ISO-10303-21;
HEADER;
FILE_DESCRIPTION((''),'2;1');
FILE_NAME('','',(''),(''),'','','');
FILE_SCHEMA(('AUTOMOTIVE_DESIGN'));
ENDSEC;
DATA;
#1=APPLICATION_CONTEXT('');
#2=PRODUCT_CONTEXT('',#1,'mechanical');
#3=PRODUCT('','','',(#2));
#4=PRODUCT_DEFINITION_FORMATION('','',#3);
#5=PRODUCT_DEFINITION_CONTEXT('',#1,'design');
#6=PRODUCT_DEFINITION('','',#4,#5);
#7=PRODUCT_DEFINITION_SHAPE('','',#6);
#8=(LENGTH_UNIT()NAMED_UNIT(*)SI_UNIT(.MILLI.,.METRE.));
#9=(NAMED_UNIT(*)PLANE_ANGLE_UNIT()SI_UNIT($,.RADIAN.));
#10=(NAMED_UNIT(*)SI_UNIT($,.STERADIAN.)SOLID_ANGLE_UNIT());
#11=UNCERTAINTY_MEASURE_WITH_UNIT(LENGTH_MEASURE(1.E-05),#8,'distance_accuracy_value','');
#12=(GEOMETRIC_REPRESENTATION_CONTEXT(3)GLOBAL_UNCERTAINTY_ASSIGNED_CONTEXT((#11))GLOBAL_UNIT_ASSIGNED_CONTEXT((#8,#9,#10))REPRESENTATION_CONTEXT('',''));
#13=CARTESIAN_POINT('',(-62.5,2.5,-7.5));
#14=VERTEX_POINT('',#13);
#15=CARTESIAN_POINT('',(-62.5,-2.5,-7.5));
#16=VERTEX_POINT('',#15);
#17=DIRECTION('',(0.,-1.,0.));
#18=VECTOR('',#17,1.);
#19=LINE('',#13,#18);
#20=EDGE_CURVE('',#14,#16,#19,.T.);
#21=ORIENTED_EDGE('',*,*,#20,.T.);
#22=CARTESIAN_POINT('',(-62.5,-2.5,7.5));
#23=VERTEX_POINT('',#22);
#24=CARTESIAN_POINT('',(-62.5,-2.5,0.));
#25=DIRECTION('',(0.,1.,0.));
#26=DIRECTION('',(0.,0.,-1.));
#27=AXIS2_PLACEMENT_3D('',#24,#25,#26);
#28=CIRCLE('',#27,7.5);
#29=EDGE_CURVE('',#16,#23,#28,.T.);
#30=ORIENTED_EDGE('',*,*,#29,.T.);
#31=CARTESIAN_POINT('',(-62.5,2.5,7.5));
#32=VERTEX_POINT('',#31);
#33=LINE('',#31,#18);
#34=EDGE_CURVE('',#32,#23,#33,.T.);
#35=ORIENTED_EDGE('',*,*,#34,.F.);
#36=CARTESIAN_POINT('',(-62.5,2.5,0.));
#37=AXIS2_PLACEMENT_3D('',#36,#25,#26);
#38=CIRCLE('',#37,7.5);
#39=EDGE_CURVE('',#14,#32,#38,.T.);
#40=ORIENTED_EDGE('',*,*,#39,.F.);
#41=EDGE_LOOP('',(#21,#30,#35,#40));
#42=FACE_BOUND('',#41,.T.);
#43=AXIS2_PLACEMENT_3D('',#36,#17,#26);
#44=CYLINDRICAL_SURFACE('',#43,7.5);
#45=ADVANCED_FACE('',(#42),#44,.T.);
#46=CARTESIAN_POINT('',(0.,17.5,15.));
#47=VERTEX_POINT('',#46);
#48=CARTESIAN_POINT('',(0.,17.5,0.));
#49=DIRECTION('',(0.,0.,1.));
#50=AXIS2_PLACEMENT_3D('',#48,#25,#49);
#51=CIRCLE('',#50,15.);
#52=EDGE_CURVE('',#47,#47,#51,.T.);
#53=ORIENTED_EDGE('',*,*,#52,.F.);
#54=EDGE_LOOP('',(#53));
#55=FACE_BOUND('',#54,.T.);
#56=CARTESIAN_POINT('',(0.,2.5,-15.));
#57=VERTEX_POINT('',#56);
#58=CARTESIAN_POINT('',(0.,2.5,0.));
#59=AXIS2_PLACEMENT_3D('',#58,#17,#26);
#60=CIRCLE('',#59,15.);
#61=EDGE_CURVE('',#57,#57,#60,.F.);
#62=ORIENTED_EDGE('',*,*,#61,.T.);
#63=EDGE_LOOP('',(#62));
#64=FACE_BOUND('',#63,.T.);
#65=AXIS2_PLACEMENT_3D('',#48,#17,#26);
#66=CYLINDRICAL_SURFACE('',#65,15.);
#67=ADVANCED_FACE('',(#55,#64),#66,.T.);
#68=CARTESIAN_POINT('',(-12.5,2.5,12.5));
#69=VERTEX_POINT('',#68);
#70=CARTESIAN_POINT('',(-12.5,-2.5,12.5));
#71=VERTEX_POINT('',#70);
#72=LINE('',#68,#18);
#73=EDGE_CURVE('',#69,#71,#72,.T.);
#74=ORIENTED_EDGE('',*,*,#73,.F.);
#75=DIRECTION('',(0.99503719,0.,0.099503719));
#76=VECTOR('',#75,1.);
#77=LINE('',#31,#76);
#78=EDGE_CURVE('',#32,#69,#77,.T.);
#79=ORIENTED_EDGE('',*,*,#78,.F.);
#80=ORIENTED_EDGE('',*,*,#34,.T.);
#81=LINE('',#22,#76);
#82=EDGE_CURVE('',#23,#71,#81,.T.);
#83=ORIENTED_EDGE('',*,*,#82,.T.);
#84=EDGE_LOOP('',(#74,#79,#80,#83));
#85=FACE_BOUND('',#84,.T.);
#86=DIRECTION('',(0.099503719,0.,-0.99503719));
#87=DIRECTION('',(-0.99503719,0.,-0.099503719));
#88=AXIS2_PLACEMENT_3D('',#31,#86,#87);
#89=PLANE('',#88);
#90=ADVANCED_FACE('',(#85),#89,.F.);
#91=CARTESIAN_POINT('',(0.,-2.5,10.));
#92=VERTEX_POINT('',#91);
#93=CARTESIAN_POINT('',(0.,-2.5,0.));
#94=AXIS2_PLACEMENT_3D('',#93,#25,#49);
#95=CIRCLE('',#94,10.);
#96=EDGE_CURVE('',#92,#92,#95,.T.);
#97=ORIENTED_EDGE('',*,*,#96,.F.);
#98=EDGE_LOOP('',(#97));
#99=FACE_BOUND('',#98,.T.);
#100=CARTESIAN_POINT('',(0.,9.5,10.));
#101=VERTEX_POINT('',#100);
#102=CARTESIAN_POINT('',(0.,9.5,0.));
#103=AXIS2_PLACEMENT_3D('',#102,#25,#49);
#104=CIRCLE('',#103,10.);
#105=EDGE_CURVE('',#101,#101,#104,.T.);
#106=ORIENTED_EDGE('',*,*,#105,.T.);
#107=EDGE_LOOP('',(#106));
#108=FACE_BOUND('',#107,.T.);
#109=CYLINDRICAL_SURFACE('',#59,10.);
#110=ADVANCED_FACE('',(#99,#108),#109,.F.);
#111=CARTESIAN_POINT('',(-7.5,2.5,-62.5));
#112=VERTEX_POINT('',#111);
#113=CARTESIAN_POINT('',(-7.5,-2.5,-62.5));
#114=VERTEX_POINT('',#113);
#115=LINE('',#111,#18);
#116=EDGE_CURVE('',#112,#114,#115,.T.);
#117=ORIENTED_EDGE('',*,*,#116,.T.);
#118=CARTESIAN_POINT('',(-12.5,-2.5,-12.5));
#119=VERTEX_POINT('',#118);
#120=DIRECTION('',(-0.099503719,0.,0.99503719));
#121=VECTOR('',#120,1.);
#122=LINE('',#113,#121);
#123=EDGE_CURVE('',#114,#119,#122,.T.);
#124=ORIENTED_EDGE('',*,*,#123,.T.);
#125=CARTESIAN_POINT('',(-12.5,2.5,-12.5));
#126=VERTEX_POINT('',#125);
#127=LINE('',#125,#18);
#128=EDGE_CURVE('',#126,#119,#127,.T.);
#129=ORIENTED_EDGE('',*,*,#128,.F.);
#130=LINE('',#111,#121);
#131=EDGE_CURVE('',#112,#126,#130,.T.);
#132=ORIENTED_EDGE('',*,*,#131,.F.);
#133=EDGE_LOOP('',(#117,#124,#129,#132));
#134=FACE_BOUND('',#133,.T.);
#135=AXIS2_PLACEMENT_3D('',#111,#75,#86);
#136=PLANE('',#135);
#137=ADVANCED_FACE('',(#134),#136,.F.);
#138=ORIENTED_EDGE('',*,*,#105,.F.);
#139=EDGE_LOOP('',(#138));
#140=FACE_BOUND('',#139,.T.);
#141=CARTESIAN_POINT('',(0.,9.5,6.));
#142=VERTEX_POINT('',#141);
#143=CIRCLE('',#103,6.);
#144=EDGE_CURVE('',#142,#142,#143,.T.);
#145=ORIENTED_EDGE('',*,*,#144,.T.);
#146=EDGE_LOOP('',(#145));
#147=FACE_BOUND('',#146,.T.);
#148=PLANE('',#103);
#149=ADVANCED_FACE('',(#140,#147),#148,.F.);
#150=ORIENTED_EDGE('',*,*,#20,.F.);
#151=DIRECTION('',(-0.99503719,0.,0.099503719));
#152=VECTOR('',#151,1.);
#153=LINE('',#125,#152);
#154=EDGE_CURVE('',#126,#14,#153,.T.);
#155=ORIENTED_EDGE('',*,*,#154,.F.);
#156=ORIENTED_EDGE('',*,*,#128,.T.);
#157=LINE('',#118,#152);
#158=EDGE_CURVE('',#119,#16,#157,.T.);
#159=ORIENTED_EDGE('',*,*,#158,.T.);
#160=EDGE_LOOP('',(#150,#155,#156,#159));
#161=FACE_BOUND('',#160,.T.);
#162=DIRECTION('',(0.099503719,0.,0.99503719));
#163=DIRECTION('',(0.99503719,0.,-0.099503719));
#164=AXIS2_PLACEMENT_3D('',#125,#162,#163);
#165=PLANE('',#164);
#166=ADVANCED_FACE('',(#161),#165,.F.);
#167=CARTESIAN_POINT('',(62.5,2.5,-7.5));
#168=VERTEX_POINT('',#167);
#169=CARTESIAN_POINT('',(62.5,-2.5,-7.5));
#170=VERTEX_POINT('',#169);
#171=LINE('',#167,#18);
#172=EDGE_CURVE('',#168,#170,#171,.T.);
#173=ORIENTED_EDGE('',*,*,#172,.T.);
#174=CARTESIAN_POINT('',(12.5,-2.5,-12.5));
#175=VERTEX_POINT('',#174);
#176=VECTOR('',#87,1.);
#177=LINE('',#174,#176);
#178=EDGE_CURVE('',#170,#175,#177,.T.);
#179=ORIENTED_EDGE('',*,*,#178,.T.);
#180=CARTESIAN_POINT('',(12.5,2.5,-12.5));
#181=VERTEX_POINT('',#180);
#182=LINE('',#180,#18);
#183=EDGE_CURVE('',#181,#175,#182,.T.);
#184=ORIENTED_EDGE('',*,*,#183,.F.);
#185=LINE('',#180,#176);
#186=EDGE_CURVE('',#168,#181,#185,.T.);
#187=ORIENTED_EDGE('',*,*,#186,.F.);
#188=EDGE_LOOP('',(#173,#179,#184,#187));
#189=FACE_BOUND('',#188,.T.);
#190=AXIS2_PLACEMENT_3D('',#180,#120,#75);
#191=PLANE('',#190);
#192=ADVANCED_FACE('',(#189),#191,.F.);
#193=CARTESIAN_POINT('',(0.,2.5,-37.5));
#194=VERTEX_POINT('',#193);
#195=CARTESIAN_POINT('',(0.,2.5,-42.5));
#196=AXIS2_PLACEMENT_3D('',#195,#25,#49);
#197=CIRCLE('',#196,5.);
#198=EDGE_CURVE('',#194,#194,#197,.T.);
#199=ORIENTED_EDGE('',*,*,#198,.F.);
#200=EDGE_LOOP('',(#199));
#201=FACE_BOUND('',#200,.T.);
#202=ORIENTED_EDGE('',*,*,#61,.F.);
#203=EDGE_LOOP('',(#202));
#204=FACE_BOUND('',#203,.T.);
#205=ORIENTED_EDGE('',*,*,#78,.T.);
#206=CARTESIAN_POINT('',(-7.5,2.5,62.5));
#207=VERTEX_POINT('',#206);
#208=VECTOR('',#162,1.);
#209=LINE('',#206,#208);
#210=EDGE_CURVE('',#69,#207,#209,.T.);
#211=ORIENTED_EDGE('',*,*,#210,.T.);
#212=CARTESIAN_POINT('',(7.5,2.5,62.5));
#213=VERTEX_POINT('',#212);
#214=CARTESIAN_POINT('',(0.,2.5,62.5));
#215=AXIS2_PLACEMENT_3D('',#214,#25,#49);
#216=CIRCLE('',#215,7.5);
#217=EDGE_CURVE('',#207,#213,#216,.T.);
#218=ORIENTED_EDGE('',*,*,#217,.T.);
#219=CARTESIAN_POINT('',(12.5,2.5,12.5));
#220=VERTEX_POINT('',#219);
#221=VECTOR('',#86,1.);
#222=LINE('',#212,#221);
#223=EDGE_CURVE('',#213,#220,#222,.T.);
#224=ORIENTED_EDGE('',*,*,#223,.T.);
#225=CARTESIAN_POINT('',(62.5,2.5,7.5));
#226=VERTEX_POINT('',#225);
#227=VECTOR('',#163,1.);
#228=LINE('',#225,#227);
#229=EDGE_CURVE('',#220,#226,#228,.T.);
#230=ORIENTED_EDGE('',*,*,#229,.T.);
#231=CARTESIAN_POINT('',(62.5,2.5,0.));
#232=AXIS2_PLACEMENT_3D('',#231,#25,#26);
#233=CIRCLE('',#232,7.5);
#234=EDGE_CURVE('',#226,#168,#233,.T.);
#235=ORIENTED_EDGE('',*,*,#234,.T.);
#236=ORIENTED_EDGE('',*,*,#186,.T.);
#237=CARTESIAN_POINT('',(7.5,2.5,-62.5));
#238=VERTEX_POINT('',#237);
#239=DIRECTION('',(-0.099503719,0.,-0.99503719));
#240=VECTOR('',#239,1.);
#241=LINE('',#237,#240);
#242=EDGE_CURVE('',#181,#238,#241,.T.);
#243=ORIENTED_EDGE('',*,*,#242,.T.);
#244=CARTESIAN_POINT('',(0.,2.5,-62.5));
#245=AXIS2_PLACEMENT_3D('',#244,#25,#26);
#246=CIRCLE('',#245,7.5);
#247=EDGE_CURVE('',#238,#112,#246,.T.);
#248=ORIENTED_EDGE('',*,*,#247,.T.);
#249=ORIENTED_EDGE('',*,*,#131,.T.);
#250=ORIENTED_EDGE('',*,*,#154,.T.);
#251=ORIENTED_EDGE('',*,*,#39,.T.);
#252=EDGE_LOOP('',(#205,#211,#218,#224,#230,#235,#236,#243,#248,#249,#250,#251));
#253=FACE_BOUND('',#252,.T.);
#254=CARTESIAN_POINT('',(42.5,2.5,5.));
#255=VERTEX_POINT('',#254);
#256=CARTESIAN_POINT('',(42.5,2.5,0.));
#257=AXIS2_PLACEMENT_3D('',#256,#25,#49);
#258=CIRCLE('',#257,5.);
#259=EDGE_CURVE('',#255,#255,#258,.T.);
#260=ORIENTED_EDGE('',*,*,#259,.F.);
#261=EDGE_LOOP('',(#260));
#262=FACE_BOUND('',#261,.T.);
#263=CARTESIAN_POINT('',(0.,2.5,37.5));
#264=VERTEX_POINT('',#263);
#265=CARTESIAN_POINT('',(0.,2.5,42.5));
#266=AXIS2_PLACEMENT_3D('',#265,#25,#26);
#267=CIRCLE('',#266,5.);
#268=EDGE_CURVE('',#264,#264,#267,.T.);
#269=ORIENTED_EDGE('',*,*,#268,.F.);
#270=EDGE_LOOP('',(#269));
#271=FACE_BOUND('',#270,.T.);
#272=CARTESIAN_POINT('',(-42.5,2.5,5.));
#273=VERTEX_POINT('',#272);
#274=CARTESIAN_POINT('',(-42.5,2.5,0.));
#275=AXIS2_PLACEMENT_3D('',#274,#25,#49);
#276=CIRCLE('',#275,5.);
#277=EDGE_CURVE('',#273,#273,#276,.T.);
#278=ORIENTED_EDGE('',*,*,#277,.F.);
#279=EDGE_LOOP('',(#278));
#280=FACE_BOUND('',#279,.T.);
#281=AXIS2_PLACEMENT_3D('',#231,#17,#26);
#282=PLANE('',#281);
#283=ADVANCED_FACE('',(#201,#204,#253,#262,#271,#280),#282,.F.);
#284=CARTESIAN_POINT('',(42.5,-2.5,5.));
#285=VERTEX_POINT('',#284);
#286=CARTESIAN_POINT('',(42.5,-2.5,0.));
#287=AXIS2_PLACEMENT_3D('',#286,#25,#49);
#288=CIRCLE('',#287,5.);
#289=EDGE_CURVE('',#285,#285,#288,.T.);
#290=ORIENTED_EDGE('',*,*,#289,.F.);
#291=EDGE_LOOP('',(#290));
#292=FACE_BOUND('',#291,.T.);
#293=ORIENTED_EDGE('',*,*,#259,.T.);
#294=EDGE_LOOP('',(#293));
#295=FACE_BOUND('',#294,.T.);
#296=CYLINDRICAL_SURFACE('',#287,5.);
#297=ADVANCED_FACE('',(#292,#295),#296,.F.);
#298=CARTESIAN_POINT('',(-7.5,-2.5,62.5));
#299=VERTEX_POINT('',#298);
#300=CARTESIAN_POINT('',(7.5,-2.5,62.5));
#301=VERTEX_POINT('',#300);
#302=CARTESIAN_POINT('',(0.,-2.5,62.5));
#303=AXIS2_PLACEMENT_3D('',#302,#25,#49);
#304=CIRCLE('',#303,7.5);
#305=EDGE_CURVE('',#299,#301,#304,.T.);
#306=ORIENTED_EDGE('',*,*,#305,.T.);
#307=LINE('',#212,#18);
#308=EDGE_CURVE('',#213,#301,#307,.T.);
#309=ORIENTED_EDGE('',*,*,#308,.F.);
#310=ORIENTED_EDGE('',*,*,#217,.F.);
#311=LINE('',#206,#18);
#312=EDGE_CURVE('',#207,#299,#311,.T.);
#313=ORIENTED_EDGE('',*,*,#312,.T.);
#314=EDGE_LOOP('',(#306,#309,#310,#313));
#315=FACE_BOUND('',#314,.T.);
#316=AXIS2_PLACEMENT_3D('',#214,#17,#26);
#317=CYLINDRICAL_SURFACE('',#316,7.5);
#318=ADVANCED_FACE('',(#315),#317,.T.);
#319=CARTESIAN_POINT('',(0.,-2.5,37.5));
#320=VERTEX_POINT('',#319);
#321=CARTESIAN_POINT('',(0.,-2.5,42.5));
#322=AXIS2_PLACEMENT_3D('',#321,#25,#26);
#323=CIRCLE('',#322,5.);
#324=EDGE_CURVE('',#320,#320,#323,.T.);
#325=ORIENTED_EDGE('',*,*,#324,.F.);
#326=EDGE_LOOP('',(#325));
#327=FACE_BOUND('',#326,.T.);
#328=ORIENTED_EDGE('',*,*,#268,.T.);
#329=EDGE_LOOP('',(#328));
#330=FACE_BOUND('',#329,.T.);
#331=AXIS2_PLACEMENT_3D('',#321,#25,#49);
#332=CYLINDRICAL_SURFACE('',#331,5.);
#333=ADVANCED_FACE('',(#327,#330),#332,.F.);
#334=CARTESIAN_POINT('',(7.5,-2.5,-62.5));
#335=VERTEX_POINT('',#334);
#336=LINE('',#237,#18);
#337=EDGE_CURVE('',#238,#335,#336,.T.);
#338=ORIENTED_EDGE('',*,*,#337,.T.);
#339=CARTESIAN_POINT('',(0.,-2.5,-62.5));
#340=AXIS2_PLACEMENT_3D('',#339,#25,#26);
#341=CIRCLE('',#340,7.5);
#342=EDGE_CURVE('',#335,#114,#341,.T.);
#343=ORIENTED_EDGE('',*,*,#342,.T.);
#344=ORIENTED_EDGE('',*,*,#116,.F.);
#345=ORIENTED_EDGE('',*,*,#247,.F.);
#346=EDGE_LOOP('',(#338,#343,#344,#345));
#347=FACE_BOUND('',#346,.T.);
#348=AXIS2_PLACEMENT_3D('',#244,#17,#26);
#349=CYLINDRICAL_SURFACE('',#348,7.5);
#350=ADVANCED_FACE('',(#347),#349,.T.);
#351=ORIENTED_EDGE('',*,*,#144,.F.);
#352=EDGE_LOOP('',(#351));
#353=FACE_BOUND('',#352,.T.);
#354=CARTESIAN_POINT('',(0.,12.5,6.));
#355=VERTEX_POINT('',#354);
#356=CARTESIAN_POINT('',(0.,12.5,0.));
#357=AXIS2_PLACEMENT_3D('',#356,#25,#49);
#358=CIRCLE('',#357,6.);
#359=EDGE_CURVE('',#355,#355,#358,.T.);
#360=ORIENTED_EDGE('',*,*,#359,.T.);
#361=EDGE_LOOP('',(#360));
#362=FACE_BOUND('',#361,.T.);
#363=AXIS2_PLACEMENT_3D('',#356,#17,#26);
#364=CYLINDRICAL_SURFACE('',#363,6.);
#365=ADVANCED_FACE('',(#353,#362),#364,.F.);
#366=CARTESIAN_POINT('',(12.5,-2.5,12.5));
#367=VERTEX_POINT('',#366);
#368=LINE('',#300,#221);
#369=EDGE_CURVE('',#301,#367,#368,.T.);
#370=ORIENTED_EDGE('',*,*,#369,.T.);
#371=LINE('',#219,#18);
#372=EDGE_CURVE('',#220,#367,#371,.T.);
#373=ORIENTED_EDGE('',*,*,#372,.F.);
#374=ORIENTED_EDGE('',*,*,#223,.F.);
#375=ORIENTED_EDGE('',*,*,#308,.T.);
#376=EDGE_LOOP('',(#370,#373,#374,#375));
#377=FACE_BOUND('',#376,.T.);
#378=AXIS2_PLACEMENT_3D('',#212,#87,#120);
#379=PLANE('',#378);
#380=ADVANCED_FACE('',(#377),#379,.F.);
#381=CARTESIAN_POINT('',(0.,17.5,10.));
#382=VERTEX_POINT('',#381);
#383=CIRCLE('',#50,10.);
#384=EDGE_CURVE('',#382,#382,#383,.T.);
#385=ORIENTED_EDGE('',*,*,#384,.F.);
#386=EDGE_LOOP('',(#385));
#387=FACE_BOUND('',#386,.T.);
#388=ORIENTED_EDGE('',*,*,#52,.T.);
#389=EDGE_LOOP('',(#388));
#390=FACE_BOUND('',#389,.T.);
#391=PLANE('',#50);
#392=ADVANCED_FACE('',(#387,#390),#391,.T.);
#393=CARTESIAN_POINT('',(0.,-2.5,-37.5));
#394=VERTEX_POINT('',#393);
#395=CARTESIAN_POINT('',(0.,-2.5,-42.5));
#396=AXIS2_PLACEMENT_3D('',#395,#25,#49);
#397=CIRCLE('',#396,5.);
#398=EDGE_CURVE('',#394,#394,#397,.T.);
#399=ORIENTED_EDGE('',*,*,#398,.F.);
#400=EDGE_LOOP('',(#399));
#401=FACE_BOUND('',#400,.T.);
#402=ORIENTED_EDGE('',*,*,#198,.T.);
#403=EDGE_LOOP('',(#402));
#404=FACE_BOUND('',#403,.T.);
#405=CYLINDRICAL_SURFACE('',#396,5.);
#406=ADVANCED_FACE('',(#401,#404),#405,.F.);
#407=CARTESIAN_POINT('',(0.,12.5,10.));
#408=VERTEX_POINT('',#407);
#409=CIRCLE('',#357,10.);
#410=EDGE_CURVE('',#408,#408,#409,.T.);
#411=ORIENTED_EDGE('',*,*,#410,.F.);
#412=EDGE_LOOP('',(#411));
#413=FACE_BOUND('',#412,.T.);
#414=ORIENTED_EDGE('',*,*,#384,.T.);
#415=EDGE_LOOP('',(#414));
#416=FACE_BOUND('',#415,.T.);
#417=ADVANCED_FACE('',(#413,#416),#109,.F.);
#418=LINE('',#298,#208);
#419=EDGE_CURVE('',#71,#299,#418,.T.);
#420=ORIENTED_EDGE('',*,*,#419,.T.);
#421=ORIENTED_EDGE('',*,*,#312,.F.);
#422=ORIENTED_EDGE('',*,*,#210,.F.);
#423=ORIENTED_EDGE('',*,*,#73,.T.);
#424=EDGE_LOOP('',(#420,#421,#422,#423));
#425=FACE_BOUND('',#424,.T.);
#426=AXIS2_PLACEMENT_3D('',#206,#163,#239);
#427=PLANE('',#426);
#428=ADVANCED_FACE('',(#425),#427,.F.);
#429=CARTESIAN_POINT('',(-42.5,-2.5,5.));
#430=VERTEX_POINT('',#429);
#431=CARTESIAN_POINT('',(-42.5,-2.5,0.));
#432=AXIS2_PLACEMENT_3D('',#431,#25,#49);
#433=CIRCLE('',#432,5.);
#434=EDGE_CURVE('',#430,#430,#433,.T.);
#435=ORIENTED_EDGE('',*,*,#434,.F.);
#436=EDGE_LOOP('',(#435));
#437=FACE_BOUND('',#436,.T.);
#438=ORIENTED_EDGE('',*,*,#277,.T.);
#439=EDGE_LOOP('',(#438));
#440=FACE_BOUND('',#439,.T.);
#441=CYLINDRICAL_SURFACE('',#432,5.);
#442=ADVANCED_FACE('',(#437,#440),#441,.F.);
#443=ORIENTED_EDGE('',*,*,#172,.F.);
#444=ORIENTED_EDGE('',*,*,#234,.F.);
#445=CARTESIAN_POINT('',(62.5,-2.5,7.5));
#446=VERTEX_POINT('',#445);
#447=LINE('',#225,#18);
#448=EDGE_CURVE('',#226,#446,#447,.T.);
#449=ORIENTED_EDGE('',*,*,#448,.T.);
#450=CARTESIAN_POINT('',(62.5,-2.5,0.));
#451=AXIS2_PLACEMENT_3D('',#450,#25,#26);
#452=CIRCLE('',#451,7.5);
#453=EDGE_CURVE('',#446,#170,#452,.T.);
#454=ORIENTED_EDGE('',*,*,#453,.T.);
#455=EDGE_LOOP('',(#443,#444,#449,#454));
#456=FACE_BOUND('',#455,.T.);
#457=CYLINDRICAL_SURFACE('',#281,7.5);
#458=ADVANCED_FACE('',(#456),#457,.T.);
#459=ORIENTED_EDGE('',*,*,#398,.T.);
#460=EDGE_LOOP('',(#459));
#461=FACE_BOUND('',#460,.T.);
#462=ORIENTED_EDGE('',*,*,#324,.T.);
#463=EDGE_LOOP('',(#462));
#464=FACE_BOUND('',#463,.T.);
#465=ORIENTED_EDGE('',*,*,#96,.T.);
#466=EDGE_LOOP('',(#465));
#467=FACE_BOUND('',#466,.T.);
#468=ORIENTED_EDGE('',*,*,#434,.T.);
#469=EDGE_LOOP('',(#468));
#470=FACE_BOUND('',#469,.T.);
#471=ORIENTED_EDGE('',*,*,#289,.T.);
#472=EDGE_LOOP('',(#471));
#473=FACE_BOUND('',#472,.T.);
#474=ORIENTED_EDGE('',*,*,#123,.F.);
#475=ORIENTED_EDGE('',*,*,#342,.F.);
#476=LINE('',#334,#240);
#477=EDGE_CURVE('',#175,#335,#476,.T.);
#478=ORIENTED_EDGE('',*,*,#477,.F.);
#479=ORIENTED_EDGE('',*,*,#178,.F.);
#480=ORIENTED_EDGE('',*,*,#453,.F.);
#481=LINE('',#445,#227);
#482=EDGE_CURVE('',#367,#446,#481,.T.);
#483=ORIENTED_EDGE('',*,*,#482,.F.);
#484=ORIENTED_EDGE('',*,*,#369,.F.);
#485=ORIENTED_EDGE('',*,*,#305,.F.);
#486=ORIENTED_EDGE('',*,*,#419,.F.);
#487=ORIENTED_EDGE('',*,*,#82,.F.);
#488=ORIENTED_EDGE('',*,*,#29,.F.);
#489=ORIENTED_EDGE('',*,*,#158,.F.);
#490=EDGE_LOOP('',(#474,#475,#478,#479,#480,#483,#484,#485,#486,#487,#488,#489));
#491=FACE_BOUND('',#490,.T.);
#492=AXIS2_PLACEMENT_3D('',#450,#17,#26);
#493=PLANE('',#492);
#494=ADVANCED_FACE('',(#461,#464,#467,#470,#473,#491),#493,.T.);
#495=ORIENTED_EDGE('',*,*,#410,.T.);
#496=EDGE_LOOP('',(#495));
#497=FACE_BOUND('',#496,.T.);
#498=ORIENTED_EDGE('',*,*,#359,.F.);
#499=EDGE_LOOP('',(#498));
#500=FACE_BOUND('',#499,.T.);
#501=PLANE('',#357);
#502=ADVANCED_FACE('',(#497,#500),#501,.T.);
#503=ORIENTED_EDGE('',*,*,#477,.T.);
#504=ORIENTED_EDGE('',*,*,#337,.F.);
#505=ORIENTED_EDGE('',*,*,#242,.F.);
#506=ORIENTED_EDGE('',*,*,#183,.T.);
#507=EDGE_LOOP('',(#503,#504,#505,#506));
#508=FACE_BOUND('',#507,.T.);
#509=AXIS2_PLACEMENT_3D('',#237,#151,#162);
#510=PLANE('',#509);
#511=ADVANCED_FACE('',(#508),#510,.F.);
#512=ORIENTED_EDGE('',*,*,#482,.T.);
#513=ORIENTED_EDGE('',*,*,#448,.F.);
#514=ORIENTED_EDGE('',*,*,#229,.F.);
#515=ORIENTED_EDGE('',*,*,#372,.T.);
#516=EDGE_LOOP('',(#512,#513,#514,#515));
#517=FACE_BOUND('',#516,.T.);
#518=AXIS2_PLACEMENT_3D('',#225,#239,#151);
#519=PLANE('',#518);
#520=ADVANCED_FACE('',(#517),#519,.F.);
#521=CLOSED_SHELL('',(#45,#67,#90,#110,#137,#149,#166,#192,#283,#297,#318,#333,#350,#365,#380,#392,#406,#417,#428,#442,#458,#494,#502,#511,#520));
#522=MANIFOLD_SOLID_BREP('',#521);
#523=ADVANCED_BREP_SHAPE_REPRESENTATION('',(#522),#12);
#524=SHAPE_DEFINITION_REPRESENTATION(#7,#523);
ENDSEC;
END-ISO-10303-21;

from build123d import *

# Parameters (mm, degrees)
BOSS_EXTRUDE1_START     = -2.5
BOSS_EXTRUDE1_OUTLINE_R = 10
BOSS_EXTRUDE1_DEPTH     = 5
SKETCH2_R               = 15
SKETCH2_R_2             = 10
BOSS_EXTRUDE2_DEPTH     = 15
SKETCH3_R               = 5
CUT_EXTRUDE1_DEPTH      = 101.124921973
BOSS_EXTRUDE3_START     = 9.5
SKETCH4_R               = 10
SKETCH4_R_2             = 6
BOSS_EXTRUDE3_DEPTH     = 3


# Read off the part's stored shape, not the designer's step: Boss-Extrude1
with BuildPart() as part:
    # Boss-Extrude1 outline → Boss-Extrude1 (new body)
    with BuildSketch(Plane(origin=(0, 0, 0), x_dir=(1, 0, 0), z_dir=(0, 1, 0)).offset(BOSS_EXTRUDE1_START)):
        with BuildLine():
            Line((12.5, 12.5), (7.5, 62.5))
            ThreePointArc((7.5, 62.5), (0, 70), (-7.5, 62.5))
            Line((-7.5, 62.5), (-12.5, 12.5))
            Line((-12.5, 12.5), (-62.5, 7.5))
            ThreePointArc((-62.5, 7.5), (-70, 0), (-62.5, -7.5))
            Line((-62.5, -7.5), (-12.5, -12.5))
            Line((-12.5, -12.5), (-7.5, -62.5))
            ThreePointArc((-7.5, -62.5), (0, -70), (7.5, -62.5))
            Line((7.5, -62.5), (12.5, -12.5))
            Line((12.5, -12.5), (62.5, -7.5))
            ThreePointArc((62.5, -7.5), (70, 0), (62.5, 7.5))
            Line((62.5, 7.5), (12.5, 12.5))
        make_face()
        Circle(BOSS_EXTRUDE1_OUTLINE_R, mode=Mode.SUBTRACT)
    extrude(amount=BOSS_EXTRUDE1_DEPTH)

    # Sketch2 → Boss-Extrude2 (add)
    with BuildSketch(Plane(origin=(0, 2.5, 0), x_dir=(1, 0, 0), z_dir=(0, 1, 0))):
        with Locations(Location((0, 0, 0), (0, 0, 90))):
            Circle(SKETCH2_R)
        with Locations(Location((0, 0, 0), (0, 0, 270))):
            Circle(SKETCH2_R_2, mode=Mode.SUBTRACT)
    extrude(amount=BOSS_EXTRUDE2_DEPTH)

    # Sketch3 → Cut-Extrude1 (cut, through all)
    with BuildSketch(Plane(origin=(0, 2.5, 0), x_dir=(1, 0, 0), z_dir=(0, 1, 0))):
        with Locations(Location((42.5, 0, 0), (0, 0, 270))):
            Circle(SKETCH3_R)
        with Locations(Location((-42.5, 0, 0), (0, 0, 270))):
            Circle(SKETCH3_R)
        with Locations(Location((0, 42.5, 0), (0, 0, 270))):
            Circle(SKETCH3_R)
        with Locations(Location((0, -42.5, 0), (0, 0, 90))):
            Circle(SKETCH3_R)
    extrude(amount=-CUT_EXTRUDE1_DEPTH, mode=Mode.SUBTRACT)

    # Sketch4 → Boss-Extrude3 (add)
    with BuildSketch(Plane(origin=(0, 0, 0), x_dir=(1, 0, 0), z_dir=(0, 1, 0)).offset(BOSS_EXTRUDE3_START)):
        with Locations(Location((0, 0, 0), (0, 0, 270))):
            Circle(SKETCH4_R)
        with Locations(Location((0, 0, 0), (0, 0, 270))):
            Circle(SKETCH4_R_2, mode=Mode.SUBTRACT)
    extrude(amount=BOSS_EXTRUDE3_DEPTH)


solid = part.part
